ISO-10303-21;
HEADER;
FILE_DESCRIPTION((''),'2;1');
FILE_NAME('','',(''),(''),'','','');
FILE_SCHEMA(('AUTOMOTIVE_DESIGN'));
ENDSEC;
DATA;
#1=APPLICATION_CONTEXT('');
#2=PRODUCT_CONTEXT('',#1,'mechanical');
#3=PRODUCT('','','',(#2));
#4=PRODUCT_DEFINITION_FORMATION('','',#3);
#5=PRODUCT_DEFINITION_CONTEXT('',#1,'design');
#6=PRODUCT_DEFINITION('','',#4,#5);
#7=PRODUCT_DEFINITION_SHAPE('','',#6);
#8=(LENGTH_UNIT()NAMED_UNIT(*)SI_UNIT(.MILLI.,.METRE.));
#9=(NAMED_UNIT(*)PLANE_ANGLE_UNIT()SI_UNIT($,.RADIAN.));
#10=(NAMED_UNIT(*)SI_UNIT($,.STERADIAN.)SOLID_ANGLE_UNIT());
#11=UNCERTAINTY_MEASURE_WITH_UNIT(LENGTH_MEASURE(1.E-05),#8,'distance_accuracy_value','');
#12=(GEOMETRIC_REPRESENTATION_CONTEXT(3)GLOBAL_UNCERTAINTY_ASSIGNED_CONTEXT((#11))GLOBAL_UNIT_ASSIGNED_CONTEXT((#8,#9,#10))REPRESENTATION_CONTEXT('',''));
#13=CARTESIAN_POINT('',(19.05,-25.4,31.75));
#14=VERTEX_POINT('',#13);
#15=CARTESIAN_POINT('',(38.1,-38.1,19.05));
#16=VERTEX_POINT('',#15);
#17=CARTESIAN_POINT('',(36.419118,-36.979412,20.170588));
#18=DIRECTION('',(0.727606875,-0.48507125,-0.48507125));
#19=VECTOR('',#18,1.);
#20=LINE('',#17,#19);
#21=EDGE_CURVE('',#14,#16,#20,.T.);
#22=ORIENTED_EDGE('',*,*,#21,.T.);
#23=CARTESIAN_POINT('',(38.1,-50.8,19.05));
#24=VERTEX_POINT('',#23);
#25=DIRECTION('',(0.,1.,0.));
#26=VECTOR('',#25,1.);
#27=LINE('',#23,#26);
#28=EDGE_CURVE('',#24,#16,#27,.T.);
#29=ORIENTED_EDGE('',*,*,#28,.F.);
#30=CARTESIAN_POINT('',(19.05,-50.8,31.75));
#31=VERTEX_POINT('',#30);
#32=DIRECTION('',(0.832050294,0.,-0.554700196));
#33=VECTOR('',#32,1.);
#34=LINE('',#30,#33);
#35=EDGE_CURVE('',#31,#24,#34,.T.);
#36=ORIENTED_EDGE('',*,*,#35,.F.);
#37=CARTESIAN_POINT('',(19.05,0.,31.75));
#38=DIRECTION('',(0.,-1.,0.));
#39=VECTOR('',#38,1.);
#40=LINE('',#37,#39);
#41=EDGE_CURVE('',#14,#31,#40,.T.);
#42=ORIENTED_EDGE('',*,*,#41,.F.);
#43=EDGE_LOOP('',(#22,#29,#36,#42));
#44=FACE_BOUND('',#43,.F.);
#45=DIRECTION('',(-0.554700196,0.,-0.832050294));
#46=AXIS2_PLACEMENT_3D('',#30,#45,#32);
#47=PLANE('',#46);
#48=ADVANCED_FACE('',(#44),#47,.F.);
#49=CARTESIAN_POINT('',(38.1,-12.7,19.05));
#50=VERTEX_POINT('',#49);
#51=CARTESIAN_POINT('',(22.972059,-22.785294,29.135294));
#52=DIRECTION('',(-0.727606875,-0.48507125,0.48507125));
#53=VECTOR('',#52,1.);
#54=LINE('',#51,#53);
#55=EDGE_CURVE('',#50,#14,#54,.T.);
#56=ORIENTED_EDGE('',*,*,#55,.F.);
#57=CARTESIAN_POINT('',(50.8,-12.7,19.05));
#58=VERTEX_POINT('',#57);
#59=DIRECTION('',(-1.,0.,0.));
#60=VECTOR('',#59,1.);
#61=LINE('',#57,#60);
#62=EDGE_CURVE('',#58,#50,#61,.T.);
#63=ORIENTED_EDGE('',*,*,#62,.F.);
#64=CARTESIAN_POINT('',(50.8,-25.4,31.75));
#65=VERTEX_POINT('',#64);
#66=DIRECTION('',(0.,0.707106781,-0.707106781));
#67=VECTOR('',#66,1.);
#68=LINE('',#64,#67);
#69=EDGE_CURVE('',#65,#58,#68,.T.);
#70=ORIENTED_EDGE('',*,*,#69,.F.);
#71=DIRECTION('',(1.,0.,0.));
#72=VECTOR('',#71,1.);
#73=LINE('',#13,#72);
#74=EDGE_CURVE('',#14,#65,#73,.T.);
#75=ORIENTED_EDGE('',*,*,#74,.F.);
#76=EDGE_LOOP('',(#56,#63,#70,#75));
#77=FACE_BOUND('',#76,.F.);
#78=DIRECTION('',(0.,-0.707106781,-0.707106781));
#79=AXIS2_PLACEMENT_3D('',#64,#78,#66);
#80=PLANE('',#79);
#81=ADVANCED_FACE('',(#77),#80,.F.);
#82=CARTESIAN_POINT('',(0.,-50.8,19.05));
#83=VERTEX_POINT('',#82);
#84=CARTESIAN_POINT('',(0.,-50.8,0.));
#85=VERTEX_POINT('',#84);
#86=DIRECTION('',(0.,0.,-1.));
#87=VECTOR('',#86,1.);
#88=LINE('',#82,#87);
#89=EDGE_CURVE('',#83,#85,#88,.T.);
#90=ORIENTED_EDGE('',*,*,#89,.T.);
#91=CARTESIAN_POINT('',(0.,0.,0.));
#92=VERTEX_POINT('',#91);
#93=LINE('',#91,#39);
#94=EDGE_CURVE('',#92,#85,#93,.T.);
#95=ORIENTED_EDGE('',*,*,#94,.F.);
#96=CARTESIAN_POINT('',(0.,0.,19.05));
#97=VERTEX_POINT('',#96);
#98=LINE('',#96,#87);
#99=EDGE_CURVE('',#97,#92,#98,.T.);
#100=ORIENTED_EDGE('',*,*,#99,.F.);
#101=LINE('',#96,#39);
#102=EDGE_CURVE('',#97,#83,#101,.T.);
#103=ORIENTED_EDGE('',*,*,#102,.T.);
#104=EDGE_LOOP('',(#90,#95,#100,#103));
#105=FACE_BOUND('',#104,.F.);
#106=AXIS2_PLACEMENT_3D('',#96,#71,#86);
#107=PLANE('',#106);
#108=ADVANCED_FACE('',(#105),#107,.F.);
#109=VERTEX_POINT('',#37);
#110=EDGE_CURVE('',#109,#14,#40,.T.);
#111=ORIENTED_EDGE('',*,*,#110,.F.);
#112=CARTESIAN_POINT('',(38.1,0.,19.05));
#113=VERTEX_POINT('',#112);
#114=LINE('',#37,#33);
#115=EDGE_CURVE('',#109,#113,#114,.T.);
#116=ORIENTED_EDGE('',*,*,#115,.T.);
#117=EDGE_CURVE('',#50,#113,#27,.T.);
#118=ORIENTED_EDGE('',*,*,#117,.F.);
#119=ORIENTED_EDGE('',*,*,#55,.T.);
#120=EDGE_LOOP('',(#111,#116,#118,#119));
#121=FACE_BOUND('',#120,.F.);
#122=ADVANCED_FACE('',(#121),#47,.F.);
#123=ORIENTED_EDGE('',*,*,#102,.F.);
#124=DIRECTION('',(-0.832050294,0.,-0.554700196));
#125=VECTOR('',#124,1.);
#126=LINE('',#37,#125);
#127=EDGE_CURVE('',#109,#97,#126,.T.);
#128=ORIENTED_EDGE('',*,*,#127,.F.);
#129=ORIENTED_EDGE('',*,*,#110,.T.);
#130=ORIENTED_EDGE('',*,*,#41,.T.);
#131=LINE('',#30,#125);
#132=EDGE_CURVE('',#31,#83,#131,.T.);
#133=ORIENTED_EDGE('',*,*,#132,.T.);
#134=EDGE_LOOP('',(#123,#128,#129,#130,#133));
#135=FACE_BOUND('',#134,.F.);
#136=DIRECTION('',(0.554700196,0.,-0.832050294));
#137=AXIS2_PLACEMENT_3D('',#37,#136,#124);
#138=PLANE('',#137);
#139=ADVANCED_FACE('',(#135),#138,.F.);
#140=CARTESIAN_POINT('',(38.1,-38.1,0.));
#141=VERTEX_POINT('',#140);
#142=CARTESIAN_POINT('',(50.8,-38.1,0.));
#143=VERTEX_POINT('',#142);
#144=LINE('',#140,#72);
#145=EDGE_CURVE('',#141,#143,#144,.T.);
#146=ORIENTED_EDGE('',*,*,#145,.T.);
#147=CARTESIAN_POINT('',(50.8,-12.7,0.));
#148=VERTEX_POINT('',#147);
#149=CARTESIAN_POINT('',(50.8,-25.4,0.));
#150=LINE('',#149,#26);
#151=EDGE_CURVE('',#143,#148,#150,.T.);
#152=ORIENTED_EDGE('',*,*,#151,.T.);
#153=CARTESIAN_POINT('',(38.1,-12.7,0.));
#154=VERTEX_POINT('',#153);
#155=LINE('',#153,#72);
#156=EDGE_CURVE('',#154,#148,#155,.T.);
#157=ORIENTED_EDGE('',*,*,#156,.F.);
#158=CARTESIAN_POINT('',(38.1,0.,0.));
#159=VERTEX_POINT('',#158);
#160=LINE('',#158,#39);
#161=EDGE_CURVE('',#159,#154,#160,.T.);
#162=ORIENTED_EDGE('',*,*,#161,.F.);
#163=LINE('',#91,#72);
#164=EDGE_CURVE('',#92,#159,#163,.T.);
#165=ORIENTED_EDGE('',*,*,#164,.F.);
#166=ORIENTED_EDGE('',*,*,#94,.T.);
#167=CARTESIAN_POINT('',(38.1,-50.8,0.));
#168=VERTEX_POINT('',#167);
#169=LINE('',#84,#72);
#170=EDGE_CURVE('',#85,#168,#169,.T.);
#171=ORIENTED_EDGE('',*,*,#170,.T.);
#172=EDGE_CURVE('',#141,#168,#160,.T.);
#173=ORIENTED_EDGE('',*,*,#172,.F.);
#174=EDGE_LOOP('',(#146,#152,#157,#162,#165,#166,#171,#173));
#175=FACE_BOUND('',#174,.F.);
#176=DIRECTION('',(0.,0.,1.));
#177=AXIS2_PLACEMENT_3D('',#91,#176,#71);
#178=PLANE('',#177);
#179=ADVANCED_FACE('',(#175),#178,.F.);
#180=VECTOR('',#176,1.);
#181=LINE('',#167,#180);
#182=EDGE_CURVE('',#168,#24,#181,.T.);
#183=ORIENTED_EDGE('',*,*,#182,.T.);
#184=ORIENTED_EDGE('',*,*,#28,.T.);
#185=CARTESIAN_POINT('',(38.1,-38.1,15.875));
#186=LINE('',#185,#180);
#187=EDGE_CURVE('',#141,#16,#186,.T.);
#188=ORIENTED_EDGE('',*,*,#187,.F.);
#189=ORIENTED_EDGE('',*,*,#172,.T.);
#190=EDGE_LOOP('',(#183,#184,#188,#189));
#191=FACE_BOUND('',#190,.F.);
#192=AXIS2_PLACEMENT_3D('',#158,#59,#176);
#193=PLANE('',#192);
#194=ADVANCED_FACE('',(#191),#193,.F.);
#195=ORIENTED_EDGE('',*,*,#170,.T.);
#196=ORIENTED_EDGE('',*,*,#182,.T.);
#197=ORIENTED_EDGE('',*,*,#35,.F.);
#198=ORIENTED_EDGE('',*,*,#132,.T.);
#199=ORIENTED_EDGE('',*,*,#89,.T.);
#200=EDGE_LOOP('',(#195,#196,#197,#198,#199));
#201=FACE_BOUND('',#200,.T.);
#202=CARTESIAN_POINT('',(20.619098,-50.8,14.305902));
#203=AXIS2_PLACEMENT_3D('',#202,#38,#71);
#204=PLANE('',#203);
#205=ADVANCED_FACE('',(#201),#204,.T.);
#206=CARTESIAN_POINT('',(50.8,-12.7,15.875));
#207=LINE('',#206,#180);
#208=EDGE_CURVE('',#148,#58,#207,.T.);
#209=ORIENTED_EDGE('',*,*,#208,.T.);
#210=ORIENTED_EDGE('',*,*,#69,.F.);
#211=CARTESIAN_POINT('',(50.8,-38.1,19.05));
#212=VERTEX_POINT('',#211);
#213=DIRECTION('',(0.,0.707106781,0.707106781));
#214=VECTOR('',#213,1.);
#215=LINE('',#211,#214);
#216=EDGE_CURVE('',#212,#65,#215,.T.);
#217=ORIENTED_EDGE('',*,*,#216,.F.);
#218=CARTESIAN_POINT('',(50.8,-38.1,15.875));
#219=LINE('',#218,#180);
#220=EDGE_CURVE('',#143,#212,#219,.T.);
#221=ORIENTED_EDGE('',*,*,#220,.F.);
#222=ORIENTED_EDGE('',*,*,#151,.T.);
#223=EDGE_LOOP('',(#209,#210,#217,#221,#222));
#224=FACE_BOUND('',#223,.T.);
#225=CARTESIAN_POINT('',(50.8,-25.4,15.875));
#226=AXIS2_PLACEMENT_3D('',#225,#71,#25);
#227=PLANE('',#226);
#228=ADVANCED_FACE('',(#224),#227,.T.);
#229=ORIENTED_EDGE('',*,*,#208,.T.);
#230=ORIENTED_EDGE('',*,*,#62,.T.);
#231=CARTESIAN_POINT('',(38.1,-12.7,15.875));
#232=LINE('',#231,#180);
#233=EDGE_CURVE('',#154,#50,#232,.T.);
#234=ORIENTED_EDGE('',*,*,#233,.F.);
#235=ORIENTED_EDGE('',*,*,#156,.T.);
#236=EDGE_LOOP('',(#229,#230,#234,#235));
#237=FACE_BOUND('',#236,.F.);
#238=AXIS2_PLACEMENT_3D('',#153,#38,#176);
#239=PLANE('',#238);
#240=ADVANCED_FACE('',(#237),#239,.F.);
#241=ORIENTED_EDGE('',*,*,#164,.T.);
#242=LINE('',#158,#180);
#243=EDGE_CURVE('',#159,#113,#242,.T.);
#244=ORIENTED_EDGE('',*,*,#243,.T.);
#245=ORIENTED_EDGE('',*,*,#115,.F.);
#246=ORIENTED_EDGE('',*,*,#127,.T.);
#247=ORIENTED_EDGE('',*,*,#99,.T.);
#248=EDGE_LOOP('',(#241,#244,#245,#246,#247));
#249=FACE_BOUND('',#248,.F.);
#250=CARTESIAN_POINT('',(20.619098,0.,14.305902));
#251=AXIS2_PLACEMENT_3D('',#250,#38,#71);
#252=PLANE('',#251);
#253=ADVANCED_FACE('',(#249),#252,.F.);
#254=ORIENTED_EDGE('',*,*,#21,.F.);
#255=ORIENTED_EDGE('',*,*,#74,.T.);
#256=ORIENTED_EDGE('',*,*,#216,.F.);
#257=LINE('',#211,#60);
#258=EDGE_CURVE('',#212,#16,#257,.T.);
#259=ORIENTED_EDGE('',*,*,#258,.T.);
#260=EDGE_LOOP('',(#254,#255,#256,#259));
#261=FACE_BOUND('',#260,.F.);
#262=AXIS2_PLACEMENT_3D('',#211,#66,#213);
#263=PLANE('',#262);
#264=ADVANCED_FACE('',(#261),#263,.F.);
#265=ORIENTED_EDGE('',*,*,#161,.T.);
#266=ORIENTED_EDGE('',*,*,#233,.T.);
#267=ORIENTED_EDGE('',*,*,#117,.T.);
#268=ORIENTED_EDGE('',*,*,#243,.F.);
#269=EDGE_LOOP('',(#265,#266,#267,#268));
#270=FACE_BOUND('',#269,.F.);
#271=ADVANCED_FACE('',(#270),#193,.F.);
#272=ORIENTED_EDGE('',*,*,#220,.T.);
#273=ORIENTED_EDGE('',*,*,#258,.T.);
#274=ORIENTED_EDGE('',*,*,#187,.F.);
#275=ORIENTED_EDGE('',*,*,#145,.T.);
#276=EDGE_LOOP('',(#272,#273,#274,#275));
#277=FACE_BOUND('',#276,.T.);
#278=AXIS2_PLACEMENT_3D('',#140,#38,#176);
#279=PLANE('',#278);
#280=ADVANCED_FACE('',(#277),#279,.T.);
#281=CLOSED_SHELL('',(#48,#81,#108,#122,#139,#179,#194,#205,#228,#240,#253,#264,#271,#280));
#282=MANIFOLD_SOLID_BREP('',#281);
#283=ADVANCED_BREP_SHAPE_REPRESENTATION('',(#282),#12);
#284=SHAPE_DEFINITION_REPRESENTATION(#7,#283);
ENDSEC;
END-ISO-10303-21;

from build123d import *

# Parameters (mm, degrees)
F1_DEPTH = 50.8
F2_W     = 25.4
F2_H     = 31.75
F3_DEPTH = 12.7
F5_DEPTH = 50.8
F7_DEPTH = 12.7
F8_DEPTH = 31.75


with BuildPart() as f1:
    # F0 (on Front) → F1 (new body)
    with BuildSketch(Plane.XZ):
        Polygon((0, 19.05), (0, 0), (38.1, 0), (38.1, 19.05), (38.1, 31.75), (19.05, 31.75), align=None)
    extrude(amount=F1_DEPTH)

    # F2 (on face) → F3 (join)
    with BuildSketch(Plane.YZ.offset(38.1)):
        with Locations((-25.4, 15.875)):
            Rectangle(F2_W, F2_H)
    extrude(amount=F3_DEPTH)

    # F4 (on face) → F5 (cut)
    with BuildSketch(Plane.XZ.offset(50.8)):
        Polygon((38.1, 31.75), (19.05, 31.75), (38.1, 19.05), align=None)
    extrude(amount=-F5_DEPTH, mode=Mode.SUBTRACT)

    # F6 (on face) → F7 (cut)
    with BuildSketch(Plane.YZ.offset(50.8)):
        Polygon((-38.1, 31.75), (-38.1, 19.05), (-25.4, 31.75), align=None)
        Polygon((-12.7, 31.75), (-25.4, 31.75), (-12.7, 19.05), align=None)
    extrude(amount=-F7_DEPTH, mode=Mode.SUBTRACT)

    # F8 (add): a face of the model
    f8_faces = [f1.faces().sort_by_distance(p)[0] for p in [
        (50.8, -25.4, 12.9645833333),
    ]]
    extrude(f8_faces, amount=-F8_DEPTH)


solid = f1.part
